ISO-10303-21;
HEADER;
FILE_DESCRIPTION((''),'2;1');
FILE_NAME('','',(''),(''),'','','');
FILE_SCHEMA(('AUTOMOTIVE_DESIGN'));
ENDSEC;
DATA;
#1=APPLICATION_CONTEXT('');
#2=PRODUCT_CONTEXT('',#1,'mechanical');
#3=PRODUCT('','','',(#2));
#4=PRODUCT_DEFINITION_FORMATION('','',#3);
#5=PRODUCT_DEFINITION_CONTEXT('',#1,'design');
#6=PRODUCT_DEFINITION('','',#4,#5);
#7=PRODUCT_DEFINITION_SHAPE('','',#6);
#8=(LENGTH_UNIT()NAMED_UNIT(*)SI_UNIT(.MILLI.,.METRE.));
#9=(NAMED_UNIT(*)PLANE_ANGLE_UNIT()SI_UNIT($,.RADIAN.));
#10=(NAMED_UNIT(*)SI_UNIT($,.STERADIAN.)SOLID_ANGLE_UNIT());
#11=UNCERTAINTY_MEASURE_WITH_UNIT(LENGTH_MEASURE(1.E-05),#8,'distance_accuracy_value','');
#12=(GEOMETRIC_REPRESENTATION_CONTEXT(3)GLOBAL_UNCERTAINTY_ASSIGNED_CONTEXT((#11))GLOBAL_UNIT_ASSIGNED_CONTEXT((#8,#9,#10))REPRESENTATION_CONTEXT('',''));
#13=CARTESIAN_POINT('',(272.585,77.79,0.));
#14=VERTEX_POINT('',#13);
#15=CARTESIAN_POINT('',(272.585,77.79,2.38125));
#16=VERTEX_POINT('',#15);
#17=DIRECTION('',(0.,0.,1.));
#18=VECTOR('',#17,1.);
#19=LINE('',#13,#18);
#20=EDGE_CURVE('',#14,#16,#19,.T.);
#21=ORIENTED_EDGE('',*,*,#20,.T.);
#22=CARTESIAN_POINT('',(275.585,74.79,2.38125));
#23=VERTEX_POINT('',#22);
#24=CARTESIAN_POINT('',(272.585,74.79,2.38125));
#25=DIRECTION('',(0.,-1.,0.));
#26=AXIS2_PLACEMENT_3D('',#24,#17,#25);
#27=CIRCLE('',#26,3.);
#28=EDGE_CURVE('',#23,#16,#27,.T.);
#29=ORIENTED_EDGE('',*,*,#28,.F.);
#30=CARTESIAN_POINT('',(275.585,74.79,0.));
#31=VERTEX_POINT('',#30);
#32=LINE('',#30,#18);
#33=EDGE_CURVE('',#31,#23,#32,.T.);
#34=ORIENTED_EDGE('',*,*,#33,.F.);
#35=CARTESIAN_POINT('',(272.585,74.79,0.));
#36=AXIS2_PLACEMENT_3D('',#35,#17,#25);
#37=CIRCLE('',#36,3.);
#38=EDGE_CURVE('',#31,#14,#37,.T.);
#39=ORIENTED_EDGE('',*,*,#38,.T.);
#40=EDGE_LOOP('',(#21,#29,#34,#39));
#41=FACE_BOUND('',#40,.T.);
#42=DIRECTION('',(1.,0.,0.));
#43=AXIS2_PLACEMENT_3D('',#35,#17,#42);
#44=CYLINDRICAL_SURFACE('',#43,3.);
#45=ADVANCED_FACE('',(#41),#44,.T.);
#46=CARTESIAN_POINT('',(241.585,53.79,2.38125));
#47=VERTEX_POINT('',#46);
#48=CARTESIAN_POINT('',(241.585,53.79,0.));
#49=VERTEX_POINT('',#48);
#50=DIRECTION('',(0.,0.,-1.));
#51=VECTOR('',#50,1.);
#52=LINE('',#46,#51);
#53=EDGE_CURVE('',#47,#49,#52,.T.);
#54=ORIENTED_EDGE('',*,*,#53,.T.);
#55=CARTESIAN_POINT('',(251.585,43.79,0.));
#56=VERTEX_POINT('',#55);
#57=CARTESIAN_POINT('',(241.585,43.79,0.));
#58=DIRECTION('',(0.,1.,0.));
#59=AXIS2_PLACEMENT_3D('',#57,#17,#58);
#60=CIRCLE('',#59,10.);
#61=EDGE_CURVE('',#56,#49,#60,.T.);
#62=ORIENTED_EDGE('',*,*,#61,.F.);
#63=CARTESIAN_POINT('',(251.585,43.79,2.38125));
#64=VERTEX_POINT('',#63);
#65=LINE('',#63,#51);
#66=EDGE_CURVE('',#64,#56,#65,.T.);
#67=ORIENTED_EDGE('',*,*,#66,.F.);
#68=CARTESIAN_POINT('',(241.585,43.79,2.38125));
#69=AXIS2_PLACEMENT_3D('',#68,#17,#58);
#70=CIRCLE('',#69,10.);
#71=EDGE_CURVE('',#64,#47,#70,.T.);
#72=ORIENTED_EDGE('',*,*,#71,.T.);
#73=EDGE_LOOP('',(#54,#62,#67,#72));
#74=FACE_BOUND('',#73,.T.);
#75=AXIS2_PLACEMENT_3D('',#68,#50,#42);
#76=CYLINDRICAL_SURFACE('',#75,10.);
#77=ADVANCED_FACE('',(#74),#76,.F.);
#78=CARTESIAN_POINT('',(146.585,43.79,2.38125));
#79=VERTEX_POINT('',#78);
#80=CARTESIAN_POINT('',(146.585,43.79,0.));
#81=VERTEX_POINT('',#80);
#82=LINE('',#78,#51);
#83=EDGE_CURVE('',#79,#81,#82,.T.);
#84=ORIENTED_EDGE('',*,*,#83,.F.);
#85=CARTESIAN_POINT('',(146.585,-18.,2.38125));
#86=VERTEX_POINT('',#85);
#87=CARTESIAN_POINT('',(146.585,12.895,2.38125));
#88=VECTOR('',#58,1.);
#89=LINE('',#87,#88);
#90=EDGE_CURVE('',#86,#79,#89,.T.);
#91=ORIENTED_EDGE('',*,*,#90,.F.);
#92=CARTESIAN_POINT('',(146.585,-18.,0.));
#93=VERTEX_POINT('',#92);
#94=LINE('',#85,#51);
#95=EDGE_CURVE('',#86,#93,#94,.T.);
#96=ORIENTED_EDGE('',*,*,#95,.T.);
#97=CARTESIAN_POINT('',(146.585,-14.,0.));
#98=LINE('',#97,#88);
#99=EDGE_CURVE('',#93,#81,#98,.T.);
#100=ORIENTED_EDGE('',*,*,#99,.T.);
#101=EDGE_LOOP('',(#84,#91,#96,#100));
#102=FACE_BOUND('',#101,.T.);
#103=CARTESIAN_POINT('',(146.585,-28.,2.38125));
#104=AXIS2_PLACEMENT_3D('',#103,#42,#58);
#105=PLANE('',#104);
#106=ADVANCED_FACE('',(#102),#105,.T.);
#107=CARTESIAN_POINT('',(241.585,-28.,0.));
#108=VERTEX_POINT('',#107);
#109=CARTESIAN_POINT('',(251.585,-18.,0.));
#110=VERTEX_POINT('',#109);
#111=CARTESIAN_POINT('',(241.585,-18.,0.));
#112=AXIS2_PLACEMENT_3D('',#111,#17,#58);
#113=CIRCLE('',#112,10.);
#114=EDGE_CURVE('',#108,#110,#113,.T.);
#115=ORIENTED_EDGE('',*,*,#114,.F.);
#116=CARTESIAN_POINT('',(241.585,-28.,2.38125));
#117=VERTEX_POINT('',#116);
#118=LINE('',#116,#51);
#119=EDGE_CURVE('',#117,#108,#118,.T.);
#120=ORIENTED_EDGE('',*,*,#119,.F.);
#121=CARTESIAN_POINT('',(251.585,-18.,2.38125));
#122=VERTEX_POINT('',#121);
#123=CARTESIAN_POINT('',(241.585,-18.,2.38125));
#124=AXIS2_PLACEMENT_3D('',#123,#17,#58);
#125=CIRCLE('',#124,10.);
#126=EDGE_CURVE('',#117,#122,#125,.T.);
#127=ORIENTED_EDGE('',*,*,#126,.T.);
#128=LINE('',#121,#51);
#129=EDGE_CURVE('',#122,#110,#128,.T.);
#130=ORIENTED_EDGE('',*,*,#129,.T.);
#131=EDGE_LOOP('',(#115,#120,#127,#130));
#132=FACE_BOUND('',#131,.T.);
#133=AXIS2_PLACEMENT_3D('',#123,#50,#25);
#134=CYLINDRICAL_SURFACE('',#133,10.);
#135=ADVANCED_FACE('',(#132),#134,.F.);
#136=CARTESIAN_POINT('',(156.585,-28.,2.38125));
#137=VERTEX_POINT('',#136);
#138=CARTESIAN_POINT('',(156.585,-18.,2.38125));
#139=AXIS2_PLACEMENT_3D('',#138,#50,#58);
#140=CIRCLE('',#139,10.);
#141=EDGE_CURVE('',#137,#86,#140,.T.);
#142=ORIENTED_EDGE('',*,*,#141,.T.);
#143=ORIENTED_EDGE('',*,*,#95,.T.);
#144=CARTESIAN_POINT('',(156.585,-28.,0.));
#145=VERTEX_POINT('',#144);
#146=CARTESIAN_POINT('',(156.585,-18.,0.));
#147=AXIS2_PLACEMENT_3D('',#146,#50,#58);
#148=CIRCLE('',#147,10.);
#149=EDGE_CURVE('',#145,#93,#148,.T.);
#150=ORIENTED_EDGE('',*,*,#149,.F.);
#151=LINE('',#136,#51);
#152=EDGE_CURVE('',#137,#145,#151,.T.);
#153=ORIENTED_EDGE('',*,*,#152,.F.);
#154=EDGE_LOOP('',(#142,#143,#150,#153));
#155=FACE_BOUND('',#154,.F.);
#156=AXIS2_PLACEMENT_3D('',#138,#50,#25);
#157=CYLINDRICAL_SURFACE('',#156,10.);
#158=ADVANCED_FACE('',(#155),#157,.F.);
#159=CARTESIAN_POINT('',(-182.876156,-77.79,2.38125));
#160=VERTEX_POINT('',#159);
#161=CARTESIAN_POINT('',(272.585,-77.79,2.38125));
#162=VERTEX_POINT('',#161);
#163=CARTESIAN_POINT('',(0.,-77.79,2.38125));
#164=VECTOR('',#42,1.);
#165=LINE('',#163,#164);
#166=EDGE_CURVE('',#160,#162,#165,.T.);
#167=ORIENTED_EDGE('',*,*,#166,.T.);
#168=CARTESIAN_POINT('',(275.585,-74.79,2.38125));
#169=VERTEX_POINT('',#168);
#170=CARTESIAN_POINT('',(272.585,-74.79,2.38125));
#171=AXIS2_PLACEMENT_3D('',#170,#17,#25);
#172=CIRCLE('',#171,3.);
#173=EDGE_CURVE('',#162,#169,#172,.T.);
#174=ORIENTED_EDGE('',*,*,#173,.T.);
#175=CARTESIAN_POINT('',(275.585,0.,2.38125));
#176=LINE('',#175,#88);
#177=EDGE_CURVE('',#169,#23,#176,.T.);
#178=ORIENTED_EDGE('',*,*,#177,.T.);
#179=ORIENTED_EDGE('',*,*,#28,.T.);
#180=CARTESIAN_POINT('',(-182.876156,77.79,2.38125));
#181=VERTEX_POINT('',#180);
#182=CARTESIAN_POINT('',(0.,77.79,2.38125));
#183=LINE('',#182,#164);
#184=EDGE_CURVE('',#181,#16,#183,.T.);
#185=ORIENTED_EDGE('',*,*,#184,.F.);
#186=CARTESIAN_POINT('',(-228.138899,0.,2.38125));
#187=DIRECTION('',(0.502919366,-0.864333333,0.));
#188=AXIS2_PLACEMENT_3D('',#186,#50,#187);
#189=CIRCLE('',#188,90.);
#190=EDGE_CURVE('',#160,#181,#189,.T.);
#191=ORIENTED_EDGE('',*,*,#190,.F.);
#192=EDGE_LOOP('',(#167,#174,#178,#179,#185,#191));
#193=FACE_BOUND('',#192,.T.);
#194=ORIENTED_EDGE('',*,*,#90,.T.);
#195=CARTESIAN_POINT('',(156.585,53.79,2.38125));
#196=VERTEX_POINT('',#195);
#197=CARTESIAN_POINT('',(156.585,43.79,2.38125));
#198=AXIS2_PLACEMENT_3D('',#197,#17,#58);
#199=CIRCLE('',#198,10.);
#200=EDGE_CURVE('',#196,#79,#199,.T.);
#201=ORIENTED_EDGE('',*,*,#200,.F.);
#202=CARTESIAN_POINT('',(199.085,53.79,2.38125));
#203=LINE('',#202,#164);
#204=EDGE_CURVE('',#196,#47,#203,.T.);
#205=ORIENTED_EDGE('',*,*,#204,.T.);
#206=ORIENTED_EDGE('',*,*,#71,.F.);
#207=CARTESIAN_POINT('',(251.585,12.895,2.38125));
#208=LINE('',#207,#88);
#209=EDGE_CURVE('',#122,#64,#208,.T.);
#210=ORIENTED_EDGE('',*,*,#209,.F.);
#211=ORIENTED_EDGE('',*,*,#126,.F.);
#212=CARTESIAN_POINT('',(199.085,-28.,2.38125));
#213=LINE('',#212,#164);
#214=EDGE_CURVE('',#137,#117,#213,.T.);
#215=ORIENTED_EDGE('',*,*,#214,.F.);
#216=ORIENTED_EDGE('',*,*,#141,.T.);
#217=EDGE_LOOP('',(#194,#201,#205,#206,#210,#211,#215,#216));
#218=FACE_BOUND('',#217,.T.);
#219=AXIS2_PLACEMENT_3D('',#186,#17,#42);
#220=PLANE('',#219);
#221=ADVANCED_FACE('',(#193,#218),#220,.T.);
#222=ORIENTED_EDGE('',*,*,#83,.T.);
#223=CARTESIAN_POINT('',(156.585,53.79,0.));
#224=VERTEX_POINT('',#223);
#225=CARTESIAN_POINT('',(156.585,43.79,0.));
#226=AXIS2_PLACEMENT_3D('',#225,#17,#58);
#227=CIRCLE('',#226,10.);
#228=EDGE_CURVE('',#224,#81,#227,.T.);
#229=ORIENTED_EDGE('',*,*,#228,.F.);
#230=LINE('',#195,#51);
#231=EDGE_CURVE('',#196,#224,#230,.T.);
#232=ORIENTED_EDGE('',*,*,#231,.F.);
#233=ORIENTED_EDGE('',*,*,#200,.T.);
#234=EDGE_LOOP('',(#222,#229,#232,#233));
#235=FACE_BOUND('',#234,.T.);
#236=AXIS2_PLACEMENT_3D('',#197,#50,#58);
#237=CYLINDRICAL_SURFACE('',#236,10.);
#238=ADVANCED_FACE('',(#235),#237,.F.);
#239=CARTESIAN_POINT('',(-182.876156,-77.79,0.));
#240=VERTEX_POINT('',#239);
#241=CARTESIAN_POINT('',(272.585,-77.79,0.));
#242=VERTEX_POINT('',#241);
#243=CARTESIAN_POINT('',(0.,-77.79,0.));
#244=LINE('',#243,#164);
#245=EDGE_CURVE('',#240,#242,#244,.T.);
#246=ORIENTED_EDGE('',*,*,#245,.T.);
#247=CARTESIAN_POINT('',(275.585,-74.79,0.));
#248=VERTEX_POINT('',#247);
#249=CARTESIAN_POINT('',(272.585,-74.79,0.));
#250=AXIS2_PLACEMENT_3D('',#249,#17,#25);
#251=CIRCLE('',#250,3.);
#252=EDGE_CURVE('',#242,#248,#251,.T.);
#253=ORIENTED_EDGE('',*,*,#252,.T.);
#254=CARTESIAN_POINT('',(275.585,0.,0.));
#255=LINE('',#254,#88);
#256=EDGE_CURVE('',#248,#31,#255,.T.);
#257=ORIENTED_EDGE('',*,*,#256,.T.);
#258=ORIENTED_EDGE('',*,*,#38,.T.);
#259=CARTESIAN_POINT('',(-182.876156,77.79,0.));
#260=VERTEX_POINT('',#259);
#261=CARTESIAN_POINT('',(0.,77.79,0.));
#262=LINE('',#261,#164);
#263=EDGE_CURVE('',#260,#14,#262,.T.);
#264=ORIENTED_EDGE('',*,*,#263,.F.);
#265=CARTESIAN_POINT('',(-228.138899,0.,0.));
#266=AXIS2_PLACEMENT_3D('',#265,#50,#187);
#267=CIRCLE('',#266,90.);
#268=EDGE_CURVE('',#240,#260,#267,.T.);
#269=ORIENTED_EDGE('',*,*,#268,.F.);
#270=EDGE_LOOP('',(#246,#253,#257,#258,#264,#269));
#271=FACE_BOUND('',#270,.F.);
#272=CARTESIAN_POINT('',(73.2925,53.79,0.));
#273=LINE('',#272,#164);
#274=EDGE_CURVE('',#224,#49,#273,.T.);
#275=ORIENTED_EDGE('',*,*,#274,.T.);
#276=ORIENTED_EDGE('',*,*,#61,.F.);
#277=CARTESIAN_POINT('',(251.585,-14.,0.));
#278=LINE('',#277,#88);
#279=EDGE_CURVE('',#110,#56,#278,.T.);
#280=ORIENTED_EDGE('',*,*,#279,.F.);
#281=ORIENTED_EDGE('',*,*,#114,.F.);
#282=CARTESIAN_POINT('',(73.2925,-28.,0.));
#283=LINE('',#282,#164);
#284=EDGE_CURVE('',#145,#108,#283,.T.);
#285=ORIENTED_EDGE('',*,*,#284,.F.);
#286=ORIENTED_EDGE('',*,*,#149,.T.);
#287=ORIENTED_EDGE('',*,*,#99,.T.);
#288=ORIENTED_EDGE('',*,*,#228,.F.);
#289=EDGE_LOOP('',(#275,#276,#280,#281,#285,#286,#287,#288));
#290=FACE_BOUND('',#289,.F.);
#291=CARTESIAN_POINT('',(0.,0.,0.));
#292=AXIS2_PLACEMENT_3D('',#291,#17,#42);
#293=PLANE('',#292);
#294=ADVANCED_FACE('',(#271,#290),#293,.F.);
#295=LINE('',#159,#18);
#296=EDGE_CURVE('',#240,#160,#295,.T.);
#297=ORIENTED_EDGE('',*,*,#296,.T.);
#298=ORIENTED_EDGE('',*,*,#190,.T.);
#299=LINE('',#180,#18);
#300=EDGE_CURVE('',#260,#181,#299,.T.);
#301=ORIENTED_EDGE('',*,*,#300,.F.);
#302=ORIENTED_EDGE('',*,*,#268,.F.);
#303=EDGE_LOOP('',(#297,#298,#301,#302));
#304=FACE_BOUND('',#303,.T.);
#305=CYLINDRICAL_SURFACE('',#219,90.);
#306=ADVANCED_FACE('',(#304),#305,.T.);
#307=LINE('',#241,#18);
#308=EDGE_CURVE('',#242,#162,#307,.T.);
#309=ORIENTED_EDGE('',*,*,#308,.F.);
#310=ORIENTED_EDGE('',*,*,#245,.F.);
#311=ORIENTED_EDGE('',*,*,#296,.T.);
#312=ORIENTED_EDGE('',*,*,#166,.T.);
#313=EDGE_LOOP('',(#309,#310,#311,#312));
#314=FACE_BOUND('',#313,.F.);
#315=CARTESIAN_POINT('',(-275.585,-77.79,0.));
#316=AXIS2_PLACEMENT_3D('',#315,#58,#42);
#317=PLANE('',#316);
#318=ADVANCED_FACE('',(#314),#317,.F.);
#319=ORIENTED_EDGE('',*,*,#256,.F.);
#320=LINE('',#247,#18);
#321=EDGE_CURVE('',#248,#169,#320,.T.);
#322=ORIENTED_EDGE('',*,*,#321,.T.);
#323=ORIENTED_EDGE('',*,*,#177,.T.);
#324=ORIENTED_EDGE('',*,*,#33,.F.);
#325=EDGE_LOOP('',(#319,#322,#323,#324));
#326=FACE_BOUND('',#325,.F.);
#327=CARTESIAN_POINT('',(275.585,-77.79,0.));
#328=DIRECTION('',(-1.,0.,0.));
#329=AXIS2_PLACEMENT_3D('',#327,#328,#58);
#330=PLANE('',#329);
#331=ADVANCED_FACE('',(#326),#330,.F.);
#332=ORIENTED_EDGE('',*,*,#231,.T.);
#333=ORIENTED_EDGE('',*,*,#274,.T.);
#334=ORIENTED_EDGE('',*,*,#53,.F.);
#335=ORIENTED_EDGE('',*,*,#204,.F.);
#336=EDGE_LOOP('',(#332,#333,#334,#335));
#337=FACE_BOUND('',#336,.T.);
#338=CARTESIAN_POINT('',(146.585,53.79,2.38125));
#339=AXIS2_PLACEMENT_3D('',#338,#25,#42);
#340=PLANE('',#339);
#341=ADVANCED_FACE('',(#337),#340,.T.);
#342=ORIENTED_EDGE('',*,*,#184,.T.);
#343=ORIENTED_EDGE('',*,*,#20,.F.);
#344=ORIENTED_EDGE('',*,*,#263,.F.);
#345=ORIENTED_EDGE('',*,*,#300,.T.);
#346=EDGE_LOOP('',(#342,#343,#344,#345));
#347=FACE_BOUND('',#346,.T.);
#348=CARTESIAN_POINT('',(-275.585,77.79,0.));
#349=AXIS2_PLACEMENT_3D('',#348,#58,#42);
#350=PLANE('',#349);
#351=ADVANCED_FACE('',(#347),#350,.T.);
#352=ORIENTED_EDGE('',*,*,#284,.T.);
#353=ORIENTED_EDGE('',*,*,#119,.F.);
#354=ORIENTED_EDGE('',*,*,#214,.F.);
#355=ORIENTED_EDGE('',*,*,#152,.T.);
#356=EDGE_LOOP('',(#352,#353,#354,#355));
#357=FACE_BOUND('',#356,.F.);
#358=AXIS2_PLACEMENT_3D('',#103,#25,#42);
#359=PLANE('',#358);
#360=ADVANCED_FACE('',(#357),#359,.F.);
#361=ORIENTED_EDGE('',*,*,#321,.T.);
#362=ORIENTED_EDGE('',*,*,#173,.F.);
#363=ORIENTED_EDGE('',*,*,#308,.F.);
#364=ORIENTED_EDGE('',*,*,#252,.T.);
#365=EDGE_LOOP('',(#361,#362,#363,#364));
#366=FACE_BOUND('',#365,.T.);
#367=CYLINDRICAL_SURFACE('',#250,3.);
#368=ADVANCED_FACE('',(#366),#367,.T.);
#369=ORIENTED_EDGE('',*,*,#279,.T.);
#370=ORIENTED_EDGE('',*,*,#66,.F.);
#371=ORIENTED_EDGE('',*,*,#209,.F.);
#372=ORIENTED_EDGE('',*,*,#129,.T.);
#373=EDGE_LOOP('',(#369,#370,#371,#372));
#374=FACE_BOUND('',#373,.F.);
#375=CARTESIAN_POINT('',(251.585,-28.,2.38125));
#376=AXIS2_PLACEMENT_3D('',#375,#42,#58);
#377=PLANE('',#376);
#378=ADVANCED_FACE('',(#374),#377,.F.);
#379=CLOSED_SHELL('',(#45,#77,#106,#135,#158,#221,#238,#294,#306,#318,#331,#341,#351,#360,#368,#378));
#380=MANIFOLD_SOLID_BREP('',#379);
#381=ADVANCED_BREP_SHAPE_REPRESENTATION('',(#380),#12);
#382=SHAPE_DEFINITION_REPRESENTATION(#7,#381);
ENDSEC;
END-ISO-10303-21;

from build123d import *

# Parameters (mm, degrees)
F0_W     = 551.17
F0_H     = 155.58
F1_DEPTH = 2.38125
F2_R     = 3
F3_W     = 105
F3_H     = 81.79
F4_DEPTH = 25
F5_R     = 10
F6_R     = 90
F7_DEPTH = 2.38125


# Not quite as in the source:
# - a length typed as a fraction of an inch, garbled in the dataset ("3 / 203.2 mm" for 3/8 in), is restored


with BuildPart() as f1:
    # F0 (on Top) → F1 (new body)
    with BuildSketch(Plane.XY):
        Rectangle(F0_W, F0_H)
    extrude(amount=F1_DEPTH)

    # F2
    f2_edges = [f1.edges().sort_by_distance(p)[0] for p in [
        (275.585, -77.79, 1.190625),
        (-275.585, -77.79, 1.190625),
        (-275.585, 77.79, 1.190625),
        (275.585, 77.79, 1.190625),
    ]]
    fillet(f2_edges, radius=F2_R)

    # F3 (on face) → F4 (cut)
    with BuildSketch(Plane.XY.offset(2.38125)):
        with Locations((199.085, 12.895)):
            Rectangle(F3_W, F3_H)
    extrude(amount=-F4_DEPTH, mode=Mode.SUBTRACT)

    # F5
    f5_edges = [f1.edges().sort_by_distance(p)[0] for p in [
        (146.585, 53.79, 1.190625),
        (146.585, -28, 1.190625),
        (251.585, 53.79, 1.190625),
        (251.585, -28, 1.190625),
    ]]
    fillet(f5_edges, radius=F5_R)

    # F6 (on face) → F7 (join, through all)
    with BuildSketch(Plane.XY.offset(2.38125)):
        with Locations((-228.1388989337, 0)):
            Circle(F6_R)
    extrude(amount=-F7_DEPTH)


solid = f1.part
